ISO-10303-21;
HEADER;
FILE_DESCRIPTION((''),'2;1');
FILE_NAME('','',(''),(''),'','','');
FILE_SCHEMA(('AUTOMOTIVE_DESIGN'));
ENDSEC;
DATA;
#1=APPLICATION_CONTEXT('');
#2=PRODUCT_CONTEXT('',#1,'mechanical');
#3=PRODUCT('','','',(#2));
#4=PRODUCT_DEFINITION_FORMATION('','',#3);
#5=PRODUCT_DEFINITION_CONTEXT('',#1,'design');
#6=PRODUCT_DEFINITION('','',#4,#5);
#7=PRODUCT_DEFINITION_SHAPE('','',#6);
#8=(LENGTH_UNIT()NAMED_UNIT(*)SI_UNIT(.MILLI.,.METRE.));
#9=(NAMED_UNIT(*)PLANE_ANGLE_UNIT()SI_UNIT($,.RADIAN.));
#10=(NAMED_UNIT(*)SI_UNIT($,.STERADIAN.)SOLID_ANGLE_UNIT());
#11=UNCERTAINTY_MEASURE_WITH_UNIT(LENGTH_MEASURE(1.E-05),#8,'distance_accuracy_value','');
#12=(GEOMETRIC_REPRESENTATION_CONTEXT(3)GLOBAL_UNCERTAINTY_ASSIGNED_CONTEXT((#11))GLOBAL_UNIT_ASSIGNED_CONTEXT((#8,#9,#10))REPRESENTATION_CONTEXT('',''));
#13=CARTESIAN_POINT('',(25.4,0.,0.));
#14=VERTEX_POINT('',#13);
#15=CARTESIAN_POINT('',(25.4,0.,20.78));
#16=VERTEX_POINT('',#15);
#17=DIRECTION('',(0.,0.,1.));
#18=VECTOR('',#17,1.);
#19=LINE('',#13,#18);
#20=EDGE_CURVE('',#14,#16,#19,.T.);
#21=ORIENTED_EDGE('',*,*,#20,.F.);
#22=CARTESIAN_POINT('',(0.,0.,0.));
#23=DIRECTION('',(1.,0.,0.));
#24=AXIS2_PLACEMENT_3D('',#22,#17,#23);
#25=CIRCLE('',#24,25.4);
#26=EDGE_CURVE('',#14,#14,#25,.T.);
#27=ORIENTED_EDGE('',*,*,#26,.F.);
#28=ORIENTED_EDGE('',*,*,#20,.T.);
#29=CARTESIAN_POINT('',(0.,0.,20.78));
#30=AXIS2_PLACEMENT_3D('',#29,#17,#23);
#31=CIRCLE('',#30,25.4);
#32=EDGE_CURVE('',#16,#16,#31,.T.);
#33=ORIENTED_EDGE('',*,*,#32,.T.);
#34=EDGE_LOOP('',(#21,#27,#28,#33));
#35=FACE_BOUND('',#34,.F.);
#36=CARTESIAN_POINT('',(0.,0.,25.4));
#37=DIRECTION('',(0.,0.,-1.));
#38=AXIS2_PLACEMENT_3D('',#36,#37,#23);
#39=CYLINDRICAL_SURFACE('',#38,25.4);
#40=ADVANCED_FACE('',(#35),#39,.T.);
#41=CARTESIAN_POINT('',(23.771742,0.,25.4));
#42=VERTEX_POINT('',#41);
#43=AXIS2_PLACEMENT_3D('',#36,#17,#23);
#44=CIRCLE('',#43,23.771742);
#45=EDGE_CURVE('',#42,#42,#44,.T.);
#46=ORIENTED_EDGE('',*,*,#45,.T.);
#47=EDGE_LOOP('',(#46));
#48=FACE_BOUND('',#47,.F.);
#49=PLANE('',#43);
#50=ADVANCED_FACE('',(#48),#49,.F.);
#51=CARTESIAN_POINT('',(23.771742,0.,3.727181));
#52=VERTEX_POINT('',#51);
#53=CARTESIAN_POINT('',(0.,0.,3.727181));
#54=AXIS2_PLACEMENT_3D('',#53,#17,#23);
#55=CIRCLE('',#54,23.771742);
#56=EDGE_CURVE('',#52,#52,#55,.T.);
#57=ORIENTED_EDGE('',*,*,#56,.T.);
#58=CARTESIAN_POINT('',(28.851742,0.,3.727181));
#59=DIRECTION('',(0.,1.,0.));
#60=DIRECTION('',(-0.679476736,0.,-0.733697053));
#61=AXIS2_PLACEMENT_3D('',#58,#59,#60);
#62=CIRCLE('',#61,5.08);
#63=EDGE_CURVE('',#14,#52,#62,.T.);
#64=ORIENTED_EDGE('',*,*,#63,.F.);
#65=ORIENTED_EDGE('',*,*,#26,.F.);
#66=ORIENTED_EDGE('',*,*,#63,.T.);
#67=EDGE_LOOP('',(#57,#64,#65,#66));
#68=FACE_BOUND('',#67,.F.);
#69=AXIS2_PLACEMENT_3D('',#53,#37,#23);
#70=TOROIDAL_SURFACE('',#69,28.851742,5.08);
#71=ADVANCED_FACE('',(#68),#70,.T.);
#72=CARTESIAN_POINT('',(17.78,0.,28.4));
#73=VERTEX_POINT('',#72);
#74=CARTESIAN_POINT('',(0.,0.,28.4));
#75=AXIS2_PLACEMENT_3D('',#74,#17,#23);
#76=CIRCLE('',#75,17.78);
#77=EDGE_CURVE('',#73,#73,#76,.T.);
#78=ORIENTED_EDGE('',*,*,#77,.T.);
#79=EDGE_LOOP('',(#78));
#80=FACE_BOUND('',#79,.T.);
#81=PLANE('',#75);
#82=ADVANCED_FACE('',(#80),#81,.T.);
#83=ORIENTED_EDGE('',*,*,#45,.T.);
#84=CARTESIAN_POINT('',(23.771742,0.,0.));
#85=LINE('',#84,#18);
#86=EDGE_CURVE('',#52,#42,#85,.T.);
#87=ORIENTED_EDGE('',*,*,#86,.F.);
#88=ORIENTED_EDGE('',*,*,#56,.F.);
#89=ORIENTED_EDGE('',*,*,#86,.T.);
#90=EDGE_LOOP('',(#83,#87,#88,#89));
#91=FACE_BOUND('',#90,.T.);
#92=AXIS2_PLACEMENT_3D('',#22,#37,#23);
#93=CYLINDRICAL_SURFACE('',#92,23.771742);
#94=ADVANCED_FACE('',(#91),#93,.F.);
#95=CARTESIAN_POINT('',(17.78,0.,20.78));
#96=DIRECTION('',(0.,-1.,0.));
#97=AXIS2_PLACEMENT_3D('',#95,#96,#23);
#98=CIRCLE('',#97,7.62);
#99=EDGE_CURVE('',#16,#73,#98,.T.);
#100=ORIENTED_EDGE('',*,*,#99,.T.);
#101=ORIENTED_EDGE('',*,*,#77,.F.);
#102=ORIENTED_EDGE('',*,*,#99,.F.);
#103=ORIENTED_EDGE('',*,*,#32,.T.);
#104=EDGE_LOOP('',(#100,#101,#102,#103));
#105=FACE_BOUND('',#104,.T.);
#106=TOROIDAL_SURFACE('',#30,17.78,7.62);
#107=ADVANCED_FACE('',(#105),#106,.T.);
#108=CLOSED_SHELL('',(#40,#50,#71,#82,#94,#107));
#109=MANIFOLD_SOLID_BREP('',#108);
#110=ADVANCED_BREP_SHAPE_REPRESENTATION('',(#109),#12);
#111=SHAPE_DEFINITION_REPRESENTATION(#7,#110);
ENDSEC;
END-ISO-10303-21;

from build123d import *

# Parameters (mm, degrees)
F0_R     = 25.4
F0_R_2   = 23.7717418162
F1_DEPTH = 25.4
F2_R     = 25.4
F2_R_2   = 23.7717418162
F3_DEPTH = 3
F4_R     = 7.62


# Not quite as in the source:
# - a fillet or chamfer that OpenCascade refuses, or shapes differently, is made with other operations: its cross-section is extruded or revolved along the edge and cut away or added


with BuildPart() as f1:
    # F0 (on Top) → F1 (new body)
    with BuildSketch(Plane.XY):
        Circle(F0_R)
        Circle(F0_R_2, mode=Mode.SUBTRACT)
    extrude(amount=F1_DEPTH)

    # F2 (on face) → F3 (join)
    with BuildSketch(Plane.XY.offset(25.4)):
        Circle(F2_R)
        Circle(F2_R_2, mode=Mode.SUBTRACT)
        Circle(F2_R)
    extrude(amount=F3_DEPTH)

    # F4
    f4_edges = [f1.edges().sort_by_distance(p)[0] for p in [
        (-25.4, 0, 28.4),
    ]]
    fillet(f4_edges, radius=F4_R)

    # F5: fillet of radius 5.08 on 1 edges, made by hand

    # F5_s1 → F5_t2 (revolve, cut)
    with BuildSketch(Plane.XZ):
        with BuildLine():
            ThreePointArc((25.4, 0), (24.1965700457, 1.6935203443), (23.7717418162, 3.7271810305))
            Line((23.7717418162, 3.7271810305), (23.7717418162, 0))
            Line((23.7717418162, 0), (25.4, 0))
        make_face()
    revolve(axis=Axis((0, 0, 0), (0, 0, 1)), mode=Mode.SUBTRACT)


solid = f1.part
